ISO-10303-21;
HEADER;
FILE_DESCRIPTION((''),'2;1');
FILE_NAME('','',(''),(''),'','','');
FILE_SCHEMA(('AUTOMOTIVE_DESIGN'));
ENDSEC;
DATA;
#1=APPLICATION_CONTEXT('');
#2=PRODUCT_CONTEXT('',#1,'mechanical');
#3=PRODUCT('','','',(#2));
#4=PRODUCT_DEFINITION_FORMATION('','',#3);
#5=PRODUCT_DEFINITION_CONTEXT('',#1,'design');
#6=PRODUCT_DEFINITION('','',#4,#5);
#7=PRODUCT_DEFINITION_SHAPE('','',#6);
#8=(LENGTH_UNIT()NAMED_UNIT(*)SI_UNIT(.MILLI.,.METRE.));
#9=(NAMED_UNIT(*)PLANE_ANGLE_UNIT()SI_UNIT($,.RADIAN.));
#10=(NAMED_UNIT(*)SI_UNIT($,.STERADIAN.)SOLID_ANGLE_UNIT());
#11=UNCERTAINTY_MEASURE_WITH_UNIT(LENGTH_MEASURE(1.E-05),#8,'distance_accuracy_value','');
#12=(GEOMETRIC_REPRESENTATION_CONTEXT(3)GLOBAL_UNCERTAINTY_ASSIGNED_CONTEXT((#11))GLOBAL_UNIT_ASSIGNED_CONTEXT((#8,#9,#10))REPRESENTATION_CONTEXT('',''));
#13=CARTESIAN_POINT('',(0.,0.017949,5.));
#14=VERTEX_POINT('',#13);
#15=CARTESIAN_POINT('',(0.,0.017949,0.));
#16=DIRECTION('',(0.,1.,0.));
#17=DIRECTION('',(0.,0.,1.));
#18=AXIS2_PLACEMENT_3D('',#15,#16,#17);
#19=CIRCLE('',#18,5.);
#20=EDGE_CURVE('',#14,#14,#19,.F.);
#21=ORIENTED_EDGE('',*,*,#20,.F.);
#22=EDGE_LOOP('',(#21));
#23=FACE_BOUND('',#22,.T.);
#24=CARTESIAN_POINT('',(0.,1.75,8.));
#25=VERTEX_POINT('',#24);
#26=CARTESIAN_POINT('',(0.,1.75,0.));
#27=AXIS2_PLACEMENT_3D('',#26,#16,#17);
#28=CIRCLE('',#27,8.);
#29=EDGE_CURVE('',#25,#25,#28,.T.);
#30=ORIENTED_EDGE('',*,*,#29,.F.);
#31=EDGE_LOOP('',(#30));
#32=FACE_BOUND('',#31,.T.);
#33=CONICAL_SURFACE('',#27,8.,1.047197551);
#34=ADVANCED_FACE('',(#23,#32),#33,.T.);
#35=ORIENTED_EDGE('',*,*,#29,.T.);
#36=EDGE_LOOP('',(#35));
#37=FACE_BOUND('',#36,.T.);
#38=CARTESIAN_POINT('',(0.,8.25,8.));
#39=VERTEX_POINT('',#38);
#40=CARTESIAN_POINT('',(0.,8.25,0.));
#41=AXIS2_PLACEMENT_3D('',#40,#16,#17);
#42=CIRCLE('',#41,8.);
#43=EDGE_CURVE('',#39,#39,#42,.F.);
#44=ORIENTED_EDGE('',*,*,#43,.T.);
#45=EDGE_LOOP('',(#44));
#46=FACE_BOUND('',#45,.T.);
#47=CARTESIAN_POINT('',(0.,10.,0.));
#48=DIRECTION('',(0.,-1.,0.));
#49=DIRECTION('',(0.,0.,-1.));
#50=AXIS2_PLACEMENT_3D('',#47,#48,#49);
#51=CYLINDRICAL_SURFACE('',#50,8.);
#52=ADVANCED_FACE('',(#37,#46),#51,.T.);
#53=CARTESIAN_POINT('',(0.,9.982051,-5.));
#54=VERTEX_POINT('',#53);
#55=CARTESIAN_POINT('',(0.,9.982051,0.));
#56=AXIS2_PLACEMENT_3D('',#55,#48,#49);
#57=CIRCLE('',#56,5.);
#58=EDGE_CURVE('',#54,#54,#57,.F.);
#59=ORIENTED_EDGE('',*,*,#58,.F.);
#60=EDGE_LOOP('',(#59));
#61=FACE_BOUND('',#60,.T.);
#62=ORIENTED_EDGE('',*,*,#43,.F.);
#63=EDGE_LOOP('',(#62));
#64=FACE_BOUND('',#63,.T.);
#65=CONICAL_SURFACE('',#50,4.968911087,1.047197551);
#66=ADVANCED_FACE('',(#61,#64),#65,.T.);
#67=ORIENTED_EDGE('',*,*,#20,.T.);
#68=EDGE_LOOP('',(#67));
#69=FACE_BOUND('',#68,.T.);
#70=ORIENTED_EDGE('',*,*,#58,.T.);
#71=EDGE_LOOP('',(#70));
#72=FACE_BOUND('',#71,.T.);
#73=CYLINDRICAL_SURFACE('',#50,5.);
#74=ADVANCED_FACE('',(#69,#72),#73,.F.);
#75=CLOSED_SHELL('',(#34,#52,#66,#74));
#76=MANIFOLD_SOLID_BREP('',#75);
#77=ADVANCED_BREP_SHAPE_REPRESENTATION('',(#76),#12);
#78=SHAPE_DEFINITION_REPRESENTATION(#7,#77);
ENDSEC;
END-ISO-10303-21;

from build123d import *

# Parameters (mm, degrees)
SKETCH2_R           = 8
SKETCH2_R_2         = 5
BOSS_EXTRUDE1_DEPTH = 10
CHAMFER3_SIZE       = 1.75
CHAMFER3_SIZE_2     = 3.031088913
CHAMFER4_SIZE       = 1.75
CHAMFER4_SIZE_2     = 3.031088913


with BuildPart() as part:
    # Sketch2 → Boss-Extrude1 (new body)
    with BuildSketch(Plane(origin=(0, 0, 0), x_dir=(1, 0, 0), z_dir=(0, 1, 0))):
        with Locations(Location((0, 0, 0), (0, 0, 270))):
            Circle(SKETCH2_R)
        with Locations(Location((0, 0, 0), (0, 0, 270))):
            Circle(SKETCH2_R_2, mode=Mode.SUBTRACT)
    extrude(amount=BOSS_EXTRUDE1_DEPTH)

    # Chamfer3
    # the kernel refuses this chamfer: 3.031088913, 1.75 mm, written as the material it takes off along each edge
    with BuildSketch(Plane(origin=(0, 10, 0), x_dir=(0, 0, 1), z_dir=(-1, 0, 0))) as chamfer3_piece_1:
        Polygon((8, -CHAMFER3_SIZE), (8 - CHAMFER3_SIZE_2, 0), (8, 0), align=None)
    revolve(axis=Axis((0, 10, 0), (0, 1, 0)), mode=Mode.SUBTRACT)

    # Chamfer4
    # the kernel refuses this chamfer: 3.031088913, 1.75 mm, written as the material it takes off along each edge
    with BuildSketch(Plane(origin=(0, 0, 0), x_dir=(0, 0, 1), z_dir=(-1, 0, 0))) as chamfer4_piece_1:
        Polygon((8, CHAMFER4_SIZE), (8 - CHAMFER4_SIZE_2, 0), (8, 0), align=None)
    revolve(axis=Axis((0, 0, 0), (0, 1, 0)), mode=Mode.SUBTRACT)


solid = part.part
